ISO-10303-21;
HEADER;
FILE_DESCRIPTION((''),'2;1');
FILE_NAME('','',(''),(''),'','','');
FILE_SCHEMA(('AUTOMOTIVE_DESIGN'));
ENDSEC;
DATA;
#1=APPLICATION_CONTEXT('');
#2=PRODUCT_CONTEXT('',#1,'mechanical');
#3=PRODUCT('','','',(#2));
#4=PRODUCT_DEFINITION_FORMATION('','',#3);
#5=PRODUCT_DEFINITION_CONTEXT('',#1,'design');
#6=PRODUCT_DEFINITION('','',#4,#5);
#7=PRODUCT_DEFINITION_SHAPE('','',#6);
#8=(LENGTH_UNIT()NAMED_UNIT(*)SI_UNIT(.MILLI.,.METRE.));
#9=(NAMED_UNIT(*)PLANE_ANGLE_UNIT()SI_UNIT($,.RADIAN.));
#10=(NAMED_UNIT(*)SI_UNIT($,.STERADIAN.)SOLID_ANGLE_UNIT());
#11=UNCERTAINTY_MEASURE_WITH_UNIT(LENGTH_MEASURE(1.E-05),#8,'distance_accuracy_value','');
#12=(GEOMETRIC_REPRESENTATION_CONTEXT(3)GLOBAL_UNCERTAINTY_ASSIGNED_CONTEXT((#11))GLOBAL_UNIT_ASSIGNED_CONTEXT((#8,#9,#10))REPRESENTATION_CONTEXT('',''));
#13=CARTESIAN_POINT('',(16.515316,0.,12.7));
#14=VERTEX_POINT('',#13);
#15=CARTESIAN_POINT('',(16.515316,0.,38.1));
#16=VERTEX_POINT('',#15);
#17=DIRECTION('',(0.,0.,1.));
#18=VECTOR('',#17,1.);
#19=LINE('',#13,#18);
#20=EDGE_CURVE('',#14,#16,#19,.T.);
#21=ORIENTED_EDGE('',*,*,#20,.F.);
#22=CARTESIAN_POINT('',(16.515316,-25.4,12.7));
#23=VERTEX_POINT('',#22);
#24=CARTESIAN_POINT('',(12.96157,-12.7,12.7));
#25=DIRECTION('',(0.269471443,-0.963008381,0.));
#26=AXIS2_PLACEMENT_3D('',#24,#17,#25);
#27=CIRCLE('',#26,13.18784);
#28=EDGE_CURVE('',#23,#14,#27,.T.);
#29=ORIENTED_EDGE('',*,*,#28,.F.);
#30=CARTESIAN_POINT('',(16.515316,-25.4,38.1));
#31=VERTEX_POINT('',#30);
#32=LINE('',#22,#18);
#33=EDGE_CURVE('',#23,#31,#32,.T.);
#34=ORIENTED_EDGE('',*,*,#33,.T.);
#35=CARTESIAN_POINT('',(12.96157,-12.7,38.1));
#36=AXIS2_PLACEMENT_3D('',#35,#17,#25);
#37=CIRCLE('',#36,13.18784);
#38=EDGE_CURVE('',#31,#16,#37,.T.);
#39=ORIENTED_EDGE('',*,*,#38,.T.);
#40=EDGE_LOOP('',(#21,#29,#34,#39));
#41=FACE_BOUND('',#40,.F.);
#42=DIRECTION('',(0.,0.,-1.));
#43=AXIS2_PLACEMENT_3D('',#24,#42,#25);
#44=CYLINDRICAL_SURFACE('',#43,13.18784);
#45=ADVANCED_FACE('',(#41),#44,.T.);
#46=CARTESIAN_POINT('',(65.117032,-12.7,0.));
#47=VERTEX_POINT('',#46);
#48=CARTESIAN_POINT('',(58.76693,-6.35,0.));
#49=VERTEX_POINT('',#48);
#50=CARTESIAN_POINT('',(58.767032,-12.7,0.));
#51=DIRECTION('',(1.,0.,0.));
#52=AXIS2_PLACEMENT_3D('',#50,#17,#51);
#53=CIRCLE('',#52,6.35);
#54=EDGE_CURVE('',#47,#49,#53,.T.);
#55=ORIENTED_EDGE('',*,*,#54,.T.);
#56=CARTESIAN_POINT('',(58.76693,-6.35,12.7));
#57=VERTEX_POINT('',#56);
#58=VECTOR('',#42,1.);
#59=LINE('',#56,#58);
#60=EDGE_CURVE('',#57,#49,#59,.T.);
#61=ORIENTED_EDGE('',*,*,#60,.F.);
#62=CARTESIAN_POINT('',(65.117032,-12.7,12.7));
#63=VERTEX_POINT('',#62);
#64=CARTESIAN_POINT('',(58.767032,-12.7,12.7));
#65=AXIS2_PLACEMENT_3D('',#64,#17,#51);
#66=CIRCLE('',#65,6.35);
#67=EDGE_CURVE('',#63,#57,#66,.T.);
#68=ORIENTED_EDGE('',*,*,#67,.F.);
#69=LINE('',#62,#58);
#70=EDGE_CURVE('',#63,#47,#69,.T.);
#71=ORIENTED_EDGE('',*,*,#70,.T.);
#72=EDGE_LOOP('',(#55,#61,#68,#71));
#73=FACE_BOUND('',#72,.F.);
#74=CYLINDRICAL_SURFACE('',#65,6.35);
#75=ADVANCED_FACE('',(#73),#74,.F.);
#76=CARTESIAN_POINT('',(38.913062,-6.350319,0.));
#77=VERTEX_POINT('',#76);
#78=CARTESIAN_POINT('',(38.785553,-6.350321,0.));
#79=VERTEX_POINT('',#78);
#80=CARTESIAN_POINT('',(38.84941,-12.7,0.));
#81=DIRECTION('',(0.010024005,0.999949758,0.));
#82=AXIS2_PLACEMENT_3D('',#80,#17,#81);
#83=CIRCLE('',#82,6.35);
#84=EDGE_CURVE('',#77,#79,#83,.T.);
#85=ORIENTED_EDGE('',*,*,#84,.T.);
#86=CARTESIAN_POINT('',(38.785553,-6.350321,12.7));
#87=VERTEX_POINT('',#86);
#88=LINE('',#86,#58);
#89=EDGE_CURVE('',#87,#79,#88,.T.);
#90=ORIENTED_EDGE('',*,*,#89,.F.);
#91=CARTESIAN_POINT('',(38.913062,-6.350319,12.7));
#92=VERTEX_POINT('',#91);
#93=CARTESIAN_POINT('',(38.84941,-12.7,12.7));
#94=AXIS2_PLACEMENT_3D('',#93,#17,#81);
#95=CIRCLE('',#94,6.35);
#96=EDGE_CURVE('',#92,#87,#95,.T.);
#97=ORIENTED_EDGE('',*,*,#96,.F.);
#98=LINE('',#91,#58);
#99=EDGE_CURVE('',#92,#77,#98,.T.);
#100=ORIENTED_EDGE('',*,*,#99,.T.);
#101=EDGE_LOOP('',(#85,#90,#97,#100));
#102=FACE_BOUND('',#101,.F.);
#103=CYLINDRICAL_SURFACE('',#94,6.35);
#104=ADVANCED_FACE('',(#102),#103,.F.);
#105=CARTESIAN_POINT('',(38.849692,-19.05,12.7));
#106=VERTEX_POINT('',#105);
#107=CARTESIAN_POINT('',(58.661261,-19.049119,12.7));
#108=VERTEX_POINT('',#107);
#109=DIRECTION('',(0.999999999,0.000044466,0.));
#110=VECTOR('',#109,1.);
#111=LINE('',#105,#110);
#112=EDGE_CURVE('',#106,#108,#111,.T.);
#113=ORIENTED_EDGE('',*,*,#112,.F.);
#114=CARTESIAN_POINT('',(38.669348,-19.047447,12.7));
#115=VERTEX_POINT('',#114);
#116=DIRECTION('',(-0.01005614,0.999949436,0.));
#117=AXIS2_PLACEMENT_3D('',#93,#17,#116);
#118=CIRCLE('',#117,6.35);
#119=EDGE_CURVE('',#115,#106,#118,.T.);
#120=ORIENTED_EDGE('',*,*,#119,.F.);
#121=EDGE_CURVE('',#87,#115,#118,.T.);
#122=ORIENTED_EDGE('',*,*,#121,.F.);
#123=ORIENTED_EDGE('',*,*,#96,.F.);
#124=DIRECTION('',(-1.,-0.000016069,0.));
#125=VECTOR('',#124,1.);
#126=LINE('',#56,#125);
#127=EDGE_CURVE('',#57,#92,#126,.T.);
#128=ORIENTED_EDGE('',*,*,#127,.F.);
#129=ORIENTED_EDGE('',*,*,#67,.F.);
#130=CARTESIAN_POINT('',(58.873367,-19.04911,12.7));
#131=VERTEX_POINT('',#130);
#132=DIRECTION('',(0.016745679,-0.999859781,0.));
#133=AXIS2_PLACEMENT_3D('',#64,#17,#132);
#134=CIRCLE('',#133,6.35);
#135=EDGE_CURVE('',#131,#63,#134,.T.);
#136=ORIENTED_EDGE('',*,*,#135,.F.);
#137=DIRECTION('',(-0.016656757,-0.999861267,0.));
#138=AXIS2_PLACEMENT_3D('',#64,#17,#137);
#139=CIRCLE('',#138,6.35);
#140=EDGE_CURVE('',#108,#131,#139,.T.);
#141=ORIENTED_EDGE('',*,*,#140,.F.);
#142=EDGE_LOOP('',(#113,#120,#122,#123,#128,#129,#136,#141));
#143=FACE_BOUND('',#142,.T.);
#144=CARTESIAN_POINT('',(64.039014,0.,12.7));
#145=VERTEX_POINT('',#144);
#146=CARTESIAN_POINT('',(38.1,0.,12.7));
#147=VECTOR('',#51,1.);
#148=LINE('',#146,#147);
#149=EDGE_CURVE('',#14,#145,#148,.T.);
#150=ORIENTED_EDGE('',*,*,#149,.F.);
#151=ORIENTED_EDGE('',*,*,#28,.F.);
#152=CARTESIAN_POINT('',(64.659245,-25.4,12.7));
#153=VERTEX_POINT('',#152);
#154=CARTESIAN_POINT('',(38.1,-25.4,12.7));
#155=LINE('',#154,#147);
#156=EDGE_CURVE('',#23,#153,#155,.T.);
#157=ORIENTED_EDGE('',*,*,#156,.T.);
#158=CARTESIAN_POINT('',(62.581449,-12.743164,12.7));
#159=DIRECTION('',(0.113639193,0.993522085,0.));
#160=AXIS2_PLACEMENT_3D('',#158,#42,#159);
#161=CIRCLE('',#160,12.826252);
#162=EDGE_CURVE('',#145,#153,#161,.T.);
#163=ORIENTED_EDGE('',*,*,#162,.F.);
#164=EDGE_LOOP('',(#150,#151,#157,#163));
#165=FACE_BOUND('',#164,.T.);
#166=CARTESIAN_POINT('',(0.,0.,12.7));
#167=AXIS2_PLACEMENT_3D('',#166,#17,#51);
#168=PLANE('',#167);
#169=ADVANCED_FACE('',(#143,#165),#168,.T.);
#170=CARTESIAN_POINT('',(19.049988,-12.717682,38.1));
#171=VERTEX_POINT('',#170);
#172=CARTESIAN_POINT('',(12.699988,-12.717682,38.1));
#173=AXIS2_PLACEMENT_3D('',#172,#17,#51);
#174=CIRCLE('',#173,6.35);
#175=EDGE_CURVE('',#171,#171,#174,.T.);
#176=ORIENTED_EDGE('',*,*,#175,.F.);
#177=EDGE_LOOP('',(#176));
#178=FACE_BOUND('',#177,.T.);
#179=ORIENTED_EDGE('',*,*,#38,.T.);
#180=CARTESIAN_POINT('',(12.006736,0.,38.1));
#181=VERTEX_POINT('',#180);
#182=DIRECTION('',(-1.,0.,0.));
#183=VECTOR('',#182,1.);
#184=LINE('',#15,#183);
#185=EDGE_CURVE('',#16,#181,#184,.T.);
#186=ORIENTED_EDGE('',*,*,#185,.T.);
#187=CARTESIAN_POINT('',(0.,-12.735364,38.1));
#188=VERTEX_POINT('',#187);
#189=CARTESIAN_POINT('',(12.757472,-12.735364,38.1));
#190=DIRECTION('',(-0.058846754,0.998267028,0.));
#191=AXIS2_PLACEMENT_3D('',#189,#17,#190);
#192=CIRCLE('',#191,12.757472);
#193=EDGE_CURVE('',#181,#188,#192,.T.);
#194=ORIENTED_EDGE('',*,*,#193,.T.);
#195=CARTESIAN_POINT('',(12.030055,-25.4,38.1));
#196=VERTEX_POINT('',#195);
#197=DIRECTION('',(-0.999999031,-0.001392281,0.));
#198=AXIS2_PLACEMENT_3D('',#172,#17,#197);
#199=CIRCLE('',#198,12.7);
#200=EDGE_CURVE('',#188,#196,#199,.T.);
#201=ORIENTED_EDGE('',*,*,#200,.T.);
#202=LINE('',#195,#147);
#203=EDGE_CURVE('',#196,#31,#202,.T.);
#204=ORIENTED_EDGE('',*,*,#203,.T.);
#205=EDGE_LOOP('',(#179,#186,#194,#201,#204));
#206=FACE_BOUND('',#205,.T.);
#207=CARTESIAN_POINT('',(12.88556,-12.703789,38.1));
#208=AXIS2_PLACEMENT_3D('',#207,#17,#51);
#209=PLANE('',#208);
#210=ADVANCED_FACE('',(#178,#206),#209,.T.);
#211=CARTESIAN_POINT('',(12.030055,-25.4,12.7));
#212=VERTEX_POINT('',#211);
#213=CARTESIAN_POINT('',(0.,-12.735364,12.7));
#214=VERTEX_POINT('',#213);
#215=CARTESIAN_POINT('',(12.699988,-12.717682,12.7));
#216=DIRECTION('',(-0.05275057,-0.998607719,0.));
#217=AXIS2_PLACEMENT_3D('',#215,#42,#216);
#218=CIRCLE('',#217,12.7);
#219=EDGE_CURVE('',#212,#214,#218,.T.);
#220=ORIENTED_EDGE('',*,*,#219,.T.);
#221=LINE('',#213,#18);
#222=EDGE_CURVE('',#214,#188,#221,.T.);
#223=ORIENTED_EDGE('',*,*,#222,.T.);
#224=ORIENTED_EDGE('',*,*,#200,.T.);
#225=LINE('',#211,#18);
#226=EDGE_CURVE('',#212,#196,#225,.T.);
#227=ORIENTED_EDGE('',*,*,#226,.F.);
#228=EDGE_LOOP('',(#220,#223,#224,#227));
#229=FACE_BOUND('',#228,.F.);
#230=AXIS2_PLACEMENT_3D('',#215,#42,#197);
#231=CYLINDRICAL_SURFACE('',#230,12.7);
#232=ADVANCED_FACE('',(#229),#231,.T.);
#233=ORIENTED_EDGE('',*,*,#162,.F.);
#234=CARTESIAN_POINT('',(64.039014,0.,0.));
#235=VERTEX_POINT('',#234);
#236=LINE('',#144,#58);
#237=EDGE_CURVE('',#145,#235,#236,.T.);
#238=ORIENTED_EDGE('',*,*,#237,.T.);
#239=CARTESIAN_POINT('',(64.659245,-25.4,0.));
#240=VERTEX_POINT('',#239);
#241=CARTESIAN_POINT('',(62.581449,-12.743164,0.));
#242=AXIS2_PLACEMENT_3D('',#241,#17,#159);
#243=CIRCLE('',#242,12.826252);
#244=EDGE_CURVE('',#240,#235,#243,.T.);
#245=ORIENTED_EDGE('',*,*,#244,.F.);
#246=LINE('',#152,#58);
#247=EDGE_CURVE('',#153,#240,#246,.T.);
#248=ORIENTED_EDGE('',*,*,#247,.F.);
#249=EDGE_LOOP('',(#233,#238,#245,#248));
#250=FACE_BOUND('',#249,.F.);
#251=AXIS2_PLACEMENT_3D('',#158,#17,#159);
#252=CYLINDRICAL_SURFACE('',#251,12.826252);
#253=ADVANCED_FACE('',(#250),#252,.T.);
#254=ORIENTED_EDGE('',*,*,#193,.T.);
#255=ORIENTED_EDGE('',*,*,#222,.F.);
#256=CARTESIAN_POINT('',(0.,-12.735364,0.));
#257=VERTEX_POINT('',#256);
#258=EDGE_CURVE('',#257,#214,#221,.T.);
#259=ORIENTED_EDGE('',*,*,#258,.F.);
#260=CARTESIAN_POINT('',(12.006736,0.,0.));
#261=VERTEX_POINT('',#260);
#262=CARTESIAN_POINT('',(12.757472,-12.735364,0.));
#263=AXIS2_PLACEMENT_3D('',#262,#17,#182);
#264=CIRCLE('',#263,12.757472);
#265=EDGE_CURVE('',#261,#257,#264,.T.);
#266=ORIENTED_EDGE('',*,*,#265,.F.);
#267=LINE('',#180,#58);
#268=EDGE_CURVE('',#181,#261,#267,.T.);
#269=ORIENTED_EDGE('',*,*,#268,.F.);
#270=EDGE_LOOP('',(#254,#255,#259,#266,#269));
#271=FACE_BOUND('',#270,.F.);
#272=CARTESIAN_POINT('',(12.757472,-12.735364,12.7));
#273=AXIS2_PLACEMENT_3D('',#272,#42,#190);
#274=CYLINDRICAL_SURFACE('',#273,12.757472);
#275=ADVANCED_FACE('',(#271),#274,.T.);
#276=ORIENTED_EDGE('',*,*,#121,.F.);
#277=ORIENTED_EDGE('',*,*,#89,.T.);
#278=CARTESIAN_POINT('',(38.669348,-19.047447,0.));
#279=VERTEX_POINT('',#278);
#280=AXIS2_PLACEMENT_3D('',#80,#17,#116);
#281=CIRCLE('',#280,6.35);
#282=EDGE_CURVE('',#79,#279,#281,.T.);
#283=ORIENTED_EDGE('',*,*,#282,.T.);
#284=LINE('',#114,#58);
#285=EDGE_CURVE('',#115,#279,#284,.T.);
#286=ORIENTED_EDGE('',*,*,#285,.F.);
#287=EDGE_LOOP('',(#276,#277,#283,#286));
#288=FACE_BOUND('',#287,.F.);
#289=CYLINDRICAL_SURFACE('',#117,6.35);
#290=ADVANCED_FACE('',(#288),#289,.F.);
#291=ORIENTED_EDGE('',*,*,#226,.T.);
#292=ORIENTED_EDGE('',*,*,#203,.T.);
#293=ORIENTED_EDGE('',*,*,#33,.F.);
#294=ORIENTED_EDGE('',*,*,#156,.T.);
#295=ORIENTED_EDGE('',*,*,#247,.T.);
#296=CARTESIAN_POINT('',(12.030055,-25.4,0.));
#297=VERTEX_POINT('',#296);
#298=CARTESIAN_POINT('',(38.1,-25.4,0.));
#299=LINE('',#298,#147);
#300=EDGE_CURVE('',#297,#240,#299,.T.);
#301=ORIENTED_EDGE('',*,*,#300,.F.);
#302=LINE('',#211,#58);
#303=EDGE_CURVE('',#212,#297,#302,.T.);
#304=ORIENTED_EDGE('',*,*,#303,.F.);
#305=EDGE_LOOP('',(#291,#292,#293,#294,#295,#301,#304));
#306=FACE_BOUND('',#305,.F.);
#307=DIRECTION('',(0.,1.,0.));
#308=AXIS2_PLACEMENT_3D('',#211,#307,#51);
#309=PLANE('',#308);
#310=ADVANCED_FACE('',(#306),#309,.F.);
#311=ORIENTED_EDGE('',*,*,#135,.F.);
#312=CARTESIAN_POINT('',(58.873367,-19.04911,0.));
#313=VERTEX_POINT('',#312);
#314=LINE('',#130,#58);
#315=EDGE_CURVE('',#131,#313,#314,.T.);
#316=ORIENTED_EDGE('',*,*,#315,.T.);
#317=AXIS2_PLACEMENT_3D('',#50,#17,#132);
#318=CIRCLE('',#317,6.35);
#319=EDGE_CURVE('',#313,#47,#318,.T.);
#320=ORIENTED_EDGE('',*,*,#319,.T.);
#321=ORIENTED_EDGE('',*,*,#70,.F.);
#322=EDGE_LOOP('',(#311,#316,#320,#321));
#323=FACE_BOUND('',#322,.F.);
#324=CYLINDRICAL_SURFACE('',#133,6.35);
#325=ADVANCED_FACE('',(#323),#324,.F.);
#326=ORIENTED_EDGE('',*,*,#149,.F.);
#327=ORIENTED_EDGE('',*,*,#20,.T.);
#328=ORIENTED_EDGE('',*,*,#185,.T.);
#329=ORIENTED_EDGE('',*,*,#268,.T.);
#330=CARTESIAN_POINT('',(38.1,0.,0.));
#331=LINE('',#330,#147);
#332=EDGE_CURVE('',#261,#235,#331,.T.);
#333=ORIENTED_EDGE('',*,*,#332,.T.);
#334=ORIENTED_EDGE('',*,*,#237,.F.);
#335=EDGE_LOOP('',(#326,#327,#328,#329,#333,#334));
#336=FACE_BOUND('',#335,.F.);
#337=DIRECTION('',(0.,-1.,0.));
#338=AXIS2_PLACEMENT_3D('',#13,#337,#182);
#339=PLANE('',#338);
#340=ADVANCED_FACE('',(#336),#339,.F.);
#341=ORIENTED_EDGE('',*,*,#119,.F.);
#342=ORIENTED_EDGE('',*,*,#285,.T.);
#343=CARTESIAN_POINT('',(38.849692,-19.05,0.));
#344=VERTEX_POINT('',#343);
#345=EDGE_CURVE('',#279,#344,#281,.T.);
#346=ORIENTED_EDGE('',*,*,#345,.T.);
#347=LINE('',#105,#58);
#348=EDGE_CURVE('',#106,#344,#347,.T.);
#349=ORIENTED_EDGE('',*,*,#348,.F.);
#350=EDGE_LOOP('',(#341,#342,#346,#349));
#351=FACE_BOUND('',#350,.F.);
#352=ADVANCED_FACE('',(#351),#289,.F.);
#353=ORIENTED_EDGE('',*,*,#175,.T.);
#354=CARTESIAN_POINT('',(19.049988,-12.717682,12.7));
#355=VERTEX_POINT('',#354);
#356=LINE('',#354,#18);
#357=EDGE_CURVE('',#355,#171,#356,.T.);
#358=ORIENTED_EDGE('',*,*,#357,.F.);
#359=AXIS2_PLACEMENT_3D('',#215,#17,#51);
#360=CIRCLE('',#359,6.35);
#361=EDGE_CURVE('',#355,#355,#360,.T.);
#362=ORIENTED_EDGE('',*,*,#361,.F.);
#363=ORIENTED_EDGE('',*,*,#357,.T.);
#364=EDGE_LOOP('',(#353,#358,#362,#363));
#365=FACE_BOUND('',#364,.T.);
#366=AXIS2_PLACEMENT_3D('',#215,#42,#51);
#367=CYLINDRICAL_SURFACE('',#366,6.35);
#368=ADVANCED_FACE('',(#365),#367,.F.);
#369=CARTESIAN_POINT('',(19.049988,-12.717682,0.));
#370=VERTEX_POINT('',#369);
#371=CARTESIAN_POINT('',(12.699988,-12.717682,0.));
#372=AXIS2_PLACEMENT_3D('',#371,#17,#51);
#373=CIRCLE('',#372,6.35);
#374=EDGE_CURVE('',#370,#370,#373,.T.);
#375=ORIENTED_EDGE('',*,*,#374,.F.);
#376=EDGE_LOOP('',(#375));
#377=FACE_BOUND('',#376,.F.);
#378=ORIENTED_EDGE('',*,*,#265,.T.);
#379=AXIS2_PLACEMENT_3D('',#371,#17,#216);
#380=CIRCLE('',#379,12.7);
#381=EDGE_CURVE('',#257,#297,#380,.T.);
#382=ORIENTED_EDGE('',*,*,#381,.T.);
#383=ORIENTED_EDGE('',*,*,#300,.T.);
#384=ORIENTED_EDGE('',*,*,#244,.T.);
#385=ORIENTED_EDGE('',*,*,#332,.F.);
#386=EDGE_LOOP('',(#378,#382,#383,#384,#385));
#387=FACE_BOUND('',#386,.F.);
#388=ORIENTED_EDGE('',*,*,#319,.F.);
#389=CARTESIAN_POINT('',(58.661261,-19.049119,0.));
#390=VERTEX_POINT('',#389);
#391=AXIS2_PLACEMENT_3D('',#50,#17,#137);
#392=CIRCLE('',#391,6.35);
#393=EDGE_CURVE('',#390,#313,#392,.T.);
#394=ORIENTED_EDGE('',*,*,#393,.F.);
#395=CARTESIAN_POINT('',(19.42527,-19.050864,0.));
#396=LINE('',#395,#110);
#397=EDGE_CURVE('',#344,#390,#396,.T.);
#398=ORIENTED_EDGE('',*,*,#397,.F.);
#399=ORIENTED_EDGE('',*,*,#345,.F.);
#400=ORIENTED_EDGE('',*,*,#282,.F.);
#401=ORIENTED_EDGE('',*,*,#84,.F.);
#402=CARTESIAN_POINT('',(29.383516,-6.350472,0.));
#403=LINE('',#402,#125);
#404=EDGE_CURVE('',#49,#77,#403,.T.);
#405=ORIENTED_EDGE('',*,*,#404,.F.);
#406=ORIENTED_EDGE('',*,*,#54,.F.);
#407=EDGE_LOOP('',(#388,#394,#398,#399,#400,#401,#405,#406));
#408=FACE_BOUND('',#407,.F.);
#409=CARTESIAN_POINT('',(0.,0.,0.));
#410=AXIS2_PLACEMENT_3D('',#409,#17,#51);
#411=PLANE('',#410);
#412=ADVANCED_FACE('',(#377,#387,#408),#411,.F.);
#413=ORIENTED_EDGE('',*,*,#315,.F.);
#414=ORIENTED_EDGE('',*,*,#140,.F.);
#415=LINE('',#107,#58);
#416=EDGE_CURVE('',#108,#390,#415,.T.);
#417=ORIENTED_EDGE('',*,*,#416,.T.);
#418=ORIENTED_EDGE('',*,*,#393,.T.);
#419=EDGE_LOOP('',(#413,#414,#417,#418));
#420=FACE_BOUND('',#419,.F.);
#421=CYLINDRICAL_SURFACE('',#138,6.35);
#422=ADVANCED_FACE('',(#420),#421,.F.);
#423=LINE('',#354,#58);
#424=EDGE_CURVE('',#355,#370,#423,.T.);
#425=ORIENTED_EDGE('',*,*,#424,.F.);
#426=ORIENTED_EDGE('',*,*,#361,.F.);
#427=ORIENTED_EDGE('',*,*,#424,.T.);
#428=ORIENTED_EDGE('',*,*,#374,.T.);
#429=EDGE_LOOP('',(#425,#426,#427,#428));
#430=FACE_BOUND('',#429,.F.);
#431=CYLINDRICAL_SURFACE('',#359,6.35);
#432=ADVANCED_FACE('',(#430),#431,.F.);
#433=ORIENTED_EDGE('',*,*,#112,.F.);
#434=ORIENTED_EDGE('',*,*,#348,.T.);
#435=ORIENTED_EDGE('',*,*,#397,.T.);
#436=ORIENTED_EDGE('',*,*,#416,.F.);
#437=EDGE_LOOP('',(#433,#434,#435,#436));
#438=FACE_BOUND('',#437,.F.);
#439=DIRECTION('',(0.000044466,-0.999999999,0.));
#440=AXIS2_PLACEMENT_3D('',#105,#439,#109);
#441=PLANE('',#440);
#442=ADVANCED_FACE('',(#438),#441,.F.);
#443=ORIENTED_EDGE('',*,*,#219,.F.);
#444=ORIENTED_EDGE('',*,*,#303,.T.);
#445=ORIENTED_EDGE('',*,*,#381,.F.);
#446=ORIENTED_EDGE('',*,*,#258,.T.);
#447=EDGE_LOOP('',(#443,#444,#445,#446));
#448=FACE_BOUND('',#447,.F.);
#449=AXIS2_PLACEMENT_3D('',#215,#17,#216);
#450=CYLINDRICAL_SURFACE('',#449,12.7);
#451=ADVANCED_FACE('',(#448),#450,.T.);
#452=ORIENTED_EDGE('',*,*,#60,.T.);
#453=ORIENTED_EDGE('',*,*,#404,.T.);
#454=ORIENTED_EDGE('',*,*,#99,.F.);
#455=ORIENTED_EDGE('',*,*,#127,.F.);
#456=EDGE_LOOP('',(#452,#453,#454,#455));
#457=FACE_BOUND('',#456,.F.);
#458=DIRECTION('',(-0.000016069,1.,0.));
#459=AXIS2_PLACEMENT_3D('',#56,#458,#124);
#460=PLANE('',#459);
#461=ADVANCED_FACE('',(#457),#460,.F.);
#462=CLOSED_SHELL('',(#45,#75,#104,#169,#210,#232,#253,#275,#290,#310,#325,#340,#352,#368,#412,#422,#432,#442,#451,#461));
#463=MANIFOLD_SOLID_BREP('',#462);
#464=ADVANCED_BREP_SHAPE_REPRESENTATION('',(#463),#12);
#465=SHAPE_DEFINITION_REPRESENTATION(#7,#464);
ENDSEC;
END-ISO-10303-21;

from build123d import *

# Parameters (mm, degrees)
F0_W      = 76.2
F0_H      = 12.7
F1_DEPTH  = 25.4
F3_DEPTH  = 25.4
F4_R      = 6.35
F5_DEPTH  = 50.8
F7_DEPTH  = 25.4
F8_R      = 6.35
F10_DEPTH = 25.4
F12_DEPTH = 25.4
F13_DEPTH = 25.4


# Not quite as in the source:
# - ends of sketch curves that miss each other by under 0.0002 mm in the source are joined


with BuildPart() as f1:
    # F0 (on Front) → F1 (new body)
    with BuildSketch(Plane.XZ):
        with Locations((38.1, 6.35)):
            Rectangle(F0_W, F0_H)
    extrude(amount=F1_DEPTH)

    # F2 (on face) → F3 (cut)
    with BuildSketch(Plane.XY.offset(12.7)):
        with BuildLine():
            ThreePointArc((64.0390142798, 0), (75.4038787349, -12.4300591202), (64.6592453122, -25.4))
            Line((64.6592453122, -25.4), (76.2, -25.4))
            Line((76.2, -25.4), (76.2, 0))
            Line((76.2, 0), (64.0390142798, 0))
        make_face()
    extrude(amount=-F3_DEPTH, mode=Mode.SUBTRACT)

    # F4 (on face) → F5 (cut)
    with BuildSketch(Plane.XY.offset(12.7)):
        with BuildLine():
            ThreePointArc((12.0300554493, -25.4), (3.4859185716, -21.4578724796), (-1.23091e-05, -12.717681963))
            Line((-1.23091e-05, -12.717681963), (0, -25.4))
            Line((0, -25.4), (12.0300554493, -25.4))
        make_face()
        with Locations((12.6999876909, -12.717681963)):
            Circle(F4_R)
    extrude(amount=-F5_DEPTH, mode=Mode.SUBTRACT)

    # F6 (on face) → F7 (cut)
    with BuildSketch(Plane.XY.offset(12.7)):
        with BuildLine():
            ThreePointArc((0, -12.735363926), (3.4749459355, -3.9839181288), (12.0067364357, 0))
            Line((12.0067364357, 0), (0, 0))
            Line((0, 0), (0, -12.735363926))
        make_face()
    extrude(amount=-F7_DEPTH, mode=Mode.SUBTRACT)

    # F8 (on face) → F10 (join)
    with BuildSketch(Plane.XY.offset(12.7)):
        with BuildLine():
            Line((12.0300554493, -25.4), (16.5153164417, -25.4))
            ThreePointArc((16.5153164417, -25.4), (26.1494098267, -12.7), (16.5153164417, 0))
            Line((16.5153164417, 0), (12.0067364357, 0))
            ThreePointArc((12.0067364357, 0), (3.4749459355, -3.9839181288), (0, -12.735363926))
            ThreePointArc((0, -12.735363926), (3.4920052044, -21.4642846479), (12.0300554493, -25.4))
        make_face()
        with Locations((12.6999876909, -12.717681963)):
            Circle(F8_R, mode=Mode.SUBTRACT)
    extrude(amount=F10_DEPTH)

    # F11 (on face) → F12 (cut)
    with BuildSketch(Plane.XY.offset(12.7)):
        with BuildLine():
            Line((39.0294717837, -19.0474465489), (58.5869699212, -19.0474465489))
            ThreePointArc((58.5869699212, -19.0474465489), (52.4176695499, -12.6100109835), (58.7669298396, -6.3500000008))
            Line((58.7669298396, -6.3500000008), (38.9130622506, -6.3503190341))
            ThreePointArc((38.9130622506, -6.3503190341), (43.361986302, -8.2324331506), (45.1994098267, -12.7))
            ThreePointArc((45.1994098267, -12.7), (43.4027543902, -17.126008731), (39.0294717837, -19.0474465489))
        make_face()
        with BuildLine():
            Line((38.6693478697, -19.0474465489), (39.0294717837, -19.0474465489))
            ThreePointArc((39.0294717837, -19.0474465489), (43.4027543902, -17.126008731), (45.1994098267, -12.7))
            ThreePointArc((45.1994098267, -12.7), (43.361986302, -8.2324331506), (38.9130622506, -6.3503190341))
            ThreePointArc((38.9130622506, -6.3503190341), (38.8493077881, -6.3500000008), (38.7855533359, -6.350321083))
            ThreePointArc((38.7855533359, -6.350321083), (32.4996757514, -12.6418865466), (38.6693478697, -19.0474465489))
        make_face()
    extrude(amount=-F12_DEPTH, mode=Mode.SUBTRACT)

    # F9 (on face) → F13 (cut)
    with BuildSketch(Plane.XY.offset(12.7)):
        with BuildLine():
            Line((38.9130622506, -6.3503190341), (38.7855533359, -6.350321083))
            ThreePointArc((38.7855533359, -6.350321083), (32.4994908094, -12.7320698283), (38.8496921889, -19.0499999937))
            ThreePointArc((38.8496921889, -19.0499999937), (43.3396377163, -17.1900282293), (45.1994098267, -12.7))
            ThreePointArc((45.1994098267, -12.7), (43.361986302, -8.2324331506), (38.9130622506, -6.3503190341))
        make_face()
        with BuildLine():
            ThreePointArc((45.1994098267, -12.7), (43.3396377163, -17.1900282293), (38.8496921889, -19.0499999937))
            Line((38.8496921889, -19.0499999937), (58.6612614637, -19.0491190428))
            ThreePointArc((58.6612614637, -19.0491190428), (52.4172516966, -12.6471639759), (58.7669298396, -6.3500000008))
            Line((58.7669298396, -6.3500000008), (38.9130622506, -6.3503190341))
            ThreePointArc((38.9130622506, -6.3503190341), (43.361986302, -8.2324331506), (45.1994098267, -12.7))
        make_face()
        with BuildLine():
            Line((58.8733669384, -19.0491096112), (58.6612614637, -19.0491190428))
            ThreePointArc((58.6612614637, -19.0491190428), (58.7673142404, -19.0499999937), (58.8733669384, -19.0491096112))
        make_face()
        with BuildLine():
            ThreePointArc((58.7669298396, -6.3500000008), (52.4172516966, -12.6471639759), (58.6612614637, -19.0491190428))
            Line((58.6612614637, -19.0491190428), (58.8733669384, -19.0491096112))
            ThreePointArc((58.8733669384, -19.0491096112), (63.294598975, -17.1523742188), (65.1170318782, -12.7))
            ThreePointArc((65.1170318782, -12.7), (63.2571238625, -8.2098358635), (58.7669298396, -6.3500000008))
        make_face()
    extrude(amount=-F13_DEPTH, mode=Mode.SUBTRACT)


solid = f1.part
